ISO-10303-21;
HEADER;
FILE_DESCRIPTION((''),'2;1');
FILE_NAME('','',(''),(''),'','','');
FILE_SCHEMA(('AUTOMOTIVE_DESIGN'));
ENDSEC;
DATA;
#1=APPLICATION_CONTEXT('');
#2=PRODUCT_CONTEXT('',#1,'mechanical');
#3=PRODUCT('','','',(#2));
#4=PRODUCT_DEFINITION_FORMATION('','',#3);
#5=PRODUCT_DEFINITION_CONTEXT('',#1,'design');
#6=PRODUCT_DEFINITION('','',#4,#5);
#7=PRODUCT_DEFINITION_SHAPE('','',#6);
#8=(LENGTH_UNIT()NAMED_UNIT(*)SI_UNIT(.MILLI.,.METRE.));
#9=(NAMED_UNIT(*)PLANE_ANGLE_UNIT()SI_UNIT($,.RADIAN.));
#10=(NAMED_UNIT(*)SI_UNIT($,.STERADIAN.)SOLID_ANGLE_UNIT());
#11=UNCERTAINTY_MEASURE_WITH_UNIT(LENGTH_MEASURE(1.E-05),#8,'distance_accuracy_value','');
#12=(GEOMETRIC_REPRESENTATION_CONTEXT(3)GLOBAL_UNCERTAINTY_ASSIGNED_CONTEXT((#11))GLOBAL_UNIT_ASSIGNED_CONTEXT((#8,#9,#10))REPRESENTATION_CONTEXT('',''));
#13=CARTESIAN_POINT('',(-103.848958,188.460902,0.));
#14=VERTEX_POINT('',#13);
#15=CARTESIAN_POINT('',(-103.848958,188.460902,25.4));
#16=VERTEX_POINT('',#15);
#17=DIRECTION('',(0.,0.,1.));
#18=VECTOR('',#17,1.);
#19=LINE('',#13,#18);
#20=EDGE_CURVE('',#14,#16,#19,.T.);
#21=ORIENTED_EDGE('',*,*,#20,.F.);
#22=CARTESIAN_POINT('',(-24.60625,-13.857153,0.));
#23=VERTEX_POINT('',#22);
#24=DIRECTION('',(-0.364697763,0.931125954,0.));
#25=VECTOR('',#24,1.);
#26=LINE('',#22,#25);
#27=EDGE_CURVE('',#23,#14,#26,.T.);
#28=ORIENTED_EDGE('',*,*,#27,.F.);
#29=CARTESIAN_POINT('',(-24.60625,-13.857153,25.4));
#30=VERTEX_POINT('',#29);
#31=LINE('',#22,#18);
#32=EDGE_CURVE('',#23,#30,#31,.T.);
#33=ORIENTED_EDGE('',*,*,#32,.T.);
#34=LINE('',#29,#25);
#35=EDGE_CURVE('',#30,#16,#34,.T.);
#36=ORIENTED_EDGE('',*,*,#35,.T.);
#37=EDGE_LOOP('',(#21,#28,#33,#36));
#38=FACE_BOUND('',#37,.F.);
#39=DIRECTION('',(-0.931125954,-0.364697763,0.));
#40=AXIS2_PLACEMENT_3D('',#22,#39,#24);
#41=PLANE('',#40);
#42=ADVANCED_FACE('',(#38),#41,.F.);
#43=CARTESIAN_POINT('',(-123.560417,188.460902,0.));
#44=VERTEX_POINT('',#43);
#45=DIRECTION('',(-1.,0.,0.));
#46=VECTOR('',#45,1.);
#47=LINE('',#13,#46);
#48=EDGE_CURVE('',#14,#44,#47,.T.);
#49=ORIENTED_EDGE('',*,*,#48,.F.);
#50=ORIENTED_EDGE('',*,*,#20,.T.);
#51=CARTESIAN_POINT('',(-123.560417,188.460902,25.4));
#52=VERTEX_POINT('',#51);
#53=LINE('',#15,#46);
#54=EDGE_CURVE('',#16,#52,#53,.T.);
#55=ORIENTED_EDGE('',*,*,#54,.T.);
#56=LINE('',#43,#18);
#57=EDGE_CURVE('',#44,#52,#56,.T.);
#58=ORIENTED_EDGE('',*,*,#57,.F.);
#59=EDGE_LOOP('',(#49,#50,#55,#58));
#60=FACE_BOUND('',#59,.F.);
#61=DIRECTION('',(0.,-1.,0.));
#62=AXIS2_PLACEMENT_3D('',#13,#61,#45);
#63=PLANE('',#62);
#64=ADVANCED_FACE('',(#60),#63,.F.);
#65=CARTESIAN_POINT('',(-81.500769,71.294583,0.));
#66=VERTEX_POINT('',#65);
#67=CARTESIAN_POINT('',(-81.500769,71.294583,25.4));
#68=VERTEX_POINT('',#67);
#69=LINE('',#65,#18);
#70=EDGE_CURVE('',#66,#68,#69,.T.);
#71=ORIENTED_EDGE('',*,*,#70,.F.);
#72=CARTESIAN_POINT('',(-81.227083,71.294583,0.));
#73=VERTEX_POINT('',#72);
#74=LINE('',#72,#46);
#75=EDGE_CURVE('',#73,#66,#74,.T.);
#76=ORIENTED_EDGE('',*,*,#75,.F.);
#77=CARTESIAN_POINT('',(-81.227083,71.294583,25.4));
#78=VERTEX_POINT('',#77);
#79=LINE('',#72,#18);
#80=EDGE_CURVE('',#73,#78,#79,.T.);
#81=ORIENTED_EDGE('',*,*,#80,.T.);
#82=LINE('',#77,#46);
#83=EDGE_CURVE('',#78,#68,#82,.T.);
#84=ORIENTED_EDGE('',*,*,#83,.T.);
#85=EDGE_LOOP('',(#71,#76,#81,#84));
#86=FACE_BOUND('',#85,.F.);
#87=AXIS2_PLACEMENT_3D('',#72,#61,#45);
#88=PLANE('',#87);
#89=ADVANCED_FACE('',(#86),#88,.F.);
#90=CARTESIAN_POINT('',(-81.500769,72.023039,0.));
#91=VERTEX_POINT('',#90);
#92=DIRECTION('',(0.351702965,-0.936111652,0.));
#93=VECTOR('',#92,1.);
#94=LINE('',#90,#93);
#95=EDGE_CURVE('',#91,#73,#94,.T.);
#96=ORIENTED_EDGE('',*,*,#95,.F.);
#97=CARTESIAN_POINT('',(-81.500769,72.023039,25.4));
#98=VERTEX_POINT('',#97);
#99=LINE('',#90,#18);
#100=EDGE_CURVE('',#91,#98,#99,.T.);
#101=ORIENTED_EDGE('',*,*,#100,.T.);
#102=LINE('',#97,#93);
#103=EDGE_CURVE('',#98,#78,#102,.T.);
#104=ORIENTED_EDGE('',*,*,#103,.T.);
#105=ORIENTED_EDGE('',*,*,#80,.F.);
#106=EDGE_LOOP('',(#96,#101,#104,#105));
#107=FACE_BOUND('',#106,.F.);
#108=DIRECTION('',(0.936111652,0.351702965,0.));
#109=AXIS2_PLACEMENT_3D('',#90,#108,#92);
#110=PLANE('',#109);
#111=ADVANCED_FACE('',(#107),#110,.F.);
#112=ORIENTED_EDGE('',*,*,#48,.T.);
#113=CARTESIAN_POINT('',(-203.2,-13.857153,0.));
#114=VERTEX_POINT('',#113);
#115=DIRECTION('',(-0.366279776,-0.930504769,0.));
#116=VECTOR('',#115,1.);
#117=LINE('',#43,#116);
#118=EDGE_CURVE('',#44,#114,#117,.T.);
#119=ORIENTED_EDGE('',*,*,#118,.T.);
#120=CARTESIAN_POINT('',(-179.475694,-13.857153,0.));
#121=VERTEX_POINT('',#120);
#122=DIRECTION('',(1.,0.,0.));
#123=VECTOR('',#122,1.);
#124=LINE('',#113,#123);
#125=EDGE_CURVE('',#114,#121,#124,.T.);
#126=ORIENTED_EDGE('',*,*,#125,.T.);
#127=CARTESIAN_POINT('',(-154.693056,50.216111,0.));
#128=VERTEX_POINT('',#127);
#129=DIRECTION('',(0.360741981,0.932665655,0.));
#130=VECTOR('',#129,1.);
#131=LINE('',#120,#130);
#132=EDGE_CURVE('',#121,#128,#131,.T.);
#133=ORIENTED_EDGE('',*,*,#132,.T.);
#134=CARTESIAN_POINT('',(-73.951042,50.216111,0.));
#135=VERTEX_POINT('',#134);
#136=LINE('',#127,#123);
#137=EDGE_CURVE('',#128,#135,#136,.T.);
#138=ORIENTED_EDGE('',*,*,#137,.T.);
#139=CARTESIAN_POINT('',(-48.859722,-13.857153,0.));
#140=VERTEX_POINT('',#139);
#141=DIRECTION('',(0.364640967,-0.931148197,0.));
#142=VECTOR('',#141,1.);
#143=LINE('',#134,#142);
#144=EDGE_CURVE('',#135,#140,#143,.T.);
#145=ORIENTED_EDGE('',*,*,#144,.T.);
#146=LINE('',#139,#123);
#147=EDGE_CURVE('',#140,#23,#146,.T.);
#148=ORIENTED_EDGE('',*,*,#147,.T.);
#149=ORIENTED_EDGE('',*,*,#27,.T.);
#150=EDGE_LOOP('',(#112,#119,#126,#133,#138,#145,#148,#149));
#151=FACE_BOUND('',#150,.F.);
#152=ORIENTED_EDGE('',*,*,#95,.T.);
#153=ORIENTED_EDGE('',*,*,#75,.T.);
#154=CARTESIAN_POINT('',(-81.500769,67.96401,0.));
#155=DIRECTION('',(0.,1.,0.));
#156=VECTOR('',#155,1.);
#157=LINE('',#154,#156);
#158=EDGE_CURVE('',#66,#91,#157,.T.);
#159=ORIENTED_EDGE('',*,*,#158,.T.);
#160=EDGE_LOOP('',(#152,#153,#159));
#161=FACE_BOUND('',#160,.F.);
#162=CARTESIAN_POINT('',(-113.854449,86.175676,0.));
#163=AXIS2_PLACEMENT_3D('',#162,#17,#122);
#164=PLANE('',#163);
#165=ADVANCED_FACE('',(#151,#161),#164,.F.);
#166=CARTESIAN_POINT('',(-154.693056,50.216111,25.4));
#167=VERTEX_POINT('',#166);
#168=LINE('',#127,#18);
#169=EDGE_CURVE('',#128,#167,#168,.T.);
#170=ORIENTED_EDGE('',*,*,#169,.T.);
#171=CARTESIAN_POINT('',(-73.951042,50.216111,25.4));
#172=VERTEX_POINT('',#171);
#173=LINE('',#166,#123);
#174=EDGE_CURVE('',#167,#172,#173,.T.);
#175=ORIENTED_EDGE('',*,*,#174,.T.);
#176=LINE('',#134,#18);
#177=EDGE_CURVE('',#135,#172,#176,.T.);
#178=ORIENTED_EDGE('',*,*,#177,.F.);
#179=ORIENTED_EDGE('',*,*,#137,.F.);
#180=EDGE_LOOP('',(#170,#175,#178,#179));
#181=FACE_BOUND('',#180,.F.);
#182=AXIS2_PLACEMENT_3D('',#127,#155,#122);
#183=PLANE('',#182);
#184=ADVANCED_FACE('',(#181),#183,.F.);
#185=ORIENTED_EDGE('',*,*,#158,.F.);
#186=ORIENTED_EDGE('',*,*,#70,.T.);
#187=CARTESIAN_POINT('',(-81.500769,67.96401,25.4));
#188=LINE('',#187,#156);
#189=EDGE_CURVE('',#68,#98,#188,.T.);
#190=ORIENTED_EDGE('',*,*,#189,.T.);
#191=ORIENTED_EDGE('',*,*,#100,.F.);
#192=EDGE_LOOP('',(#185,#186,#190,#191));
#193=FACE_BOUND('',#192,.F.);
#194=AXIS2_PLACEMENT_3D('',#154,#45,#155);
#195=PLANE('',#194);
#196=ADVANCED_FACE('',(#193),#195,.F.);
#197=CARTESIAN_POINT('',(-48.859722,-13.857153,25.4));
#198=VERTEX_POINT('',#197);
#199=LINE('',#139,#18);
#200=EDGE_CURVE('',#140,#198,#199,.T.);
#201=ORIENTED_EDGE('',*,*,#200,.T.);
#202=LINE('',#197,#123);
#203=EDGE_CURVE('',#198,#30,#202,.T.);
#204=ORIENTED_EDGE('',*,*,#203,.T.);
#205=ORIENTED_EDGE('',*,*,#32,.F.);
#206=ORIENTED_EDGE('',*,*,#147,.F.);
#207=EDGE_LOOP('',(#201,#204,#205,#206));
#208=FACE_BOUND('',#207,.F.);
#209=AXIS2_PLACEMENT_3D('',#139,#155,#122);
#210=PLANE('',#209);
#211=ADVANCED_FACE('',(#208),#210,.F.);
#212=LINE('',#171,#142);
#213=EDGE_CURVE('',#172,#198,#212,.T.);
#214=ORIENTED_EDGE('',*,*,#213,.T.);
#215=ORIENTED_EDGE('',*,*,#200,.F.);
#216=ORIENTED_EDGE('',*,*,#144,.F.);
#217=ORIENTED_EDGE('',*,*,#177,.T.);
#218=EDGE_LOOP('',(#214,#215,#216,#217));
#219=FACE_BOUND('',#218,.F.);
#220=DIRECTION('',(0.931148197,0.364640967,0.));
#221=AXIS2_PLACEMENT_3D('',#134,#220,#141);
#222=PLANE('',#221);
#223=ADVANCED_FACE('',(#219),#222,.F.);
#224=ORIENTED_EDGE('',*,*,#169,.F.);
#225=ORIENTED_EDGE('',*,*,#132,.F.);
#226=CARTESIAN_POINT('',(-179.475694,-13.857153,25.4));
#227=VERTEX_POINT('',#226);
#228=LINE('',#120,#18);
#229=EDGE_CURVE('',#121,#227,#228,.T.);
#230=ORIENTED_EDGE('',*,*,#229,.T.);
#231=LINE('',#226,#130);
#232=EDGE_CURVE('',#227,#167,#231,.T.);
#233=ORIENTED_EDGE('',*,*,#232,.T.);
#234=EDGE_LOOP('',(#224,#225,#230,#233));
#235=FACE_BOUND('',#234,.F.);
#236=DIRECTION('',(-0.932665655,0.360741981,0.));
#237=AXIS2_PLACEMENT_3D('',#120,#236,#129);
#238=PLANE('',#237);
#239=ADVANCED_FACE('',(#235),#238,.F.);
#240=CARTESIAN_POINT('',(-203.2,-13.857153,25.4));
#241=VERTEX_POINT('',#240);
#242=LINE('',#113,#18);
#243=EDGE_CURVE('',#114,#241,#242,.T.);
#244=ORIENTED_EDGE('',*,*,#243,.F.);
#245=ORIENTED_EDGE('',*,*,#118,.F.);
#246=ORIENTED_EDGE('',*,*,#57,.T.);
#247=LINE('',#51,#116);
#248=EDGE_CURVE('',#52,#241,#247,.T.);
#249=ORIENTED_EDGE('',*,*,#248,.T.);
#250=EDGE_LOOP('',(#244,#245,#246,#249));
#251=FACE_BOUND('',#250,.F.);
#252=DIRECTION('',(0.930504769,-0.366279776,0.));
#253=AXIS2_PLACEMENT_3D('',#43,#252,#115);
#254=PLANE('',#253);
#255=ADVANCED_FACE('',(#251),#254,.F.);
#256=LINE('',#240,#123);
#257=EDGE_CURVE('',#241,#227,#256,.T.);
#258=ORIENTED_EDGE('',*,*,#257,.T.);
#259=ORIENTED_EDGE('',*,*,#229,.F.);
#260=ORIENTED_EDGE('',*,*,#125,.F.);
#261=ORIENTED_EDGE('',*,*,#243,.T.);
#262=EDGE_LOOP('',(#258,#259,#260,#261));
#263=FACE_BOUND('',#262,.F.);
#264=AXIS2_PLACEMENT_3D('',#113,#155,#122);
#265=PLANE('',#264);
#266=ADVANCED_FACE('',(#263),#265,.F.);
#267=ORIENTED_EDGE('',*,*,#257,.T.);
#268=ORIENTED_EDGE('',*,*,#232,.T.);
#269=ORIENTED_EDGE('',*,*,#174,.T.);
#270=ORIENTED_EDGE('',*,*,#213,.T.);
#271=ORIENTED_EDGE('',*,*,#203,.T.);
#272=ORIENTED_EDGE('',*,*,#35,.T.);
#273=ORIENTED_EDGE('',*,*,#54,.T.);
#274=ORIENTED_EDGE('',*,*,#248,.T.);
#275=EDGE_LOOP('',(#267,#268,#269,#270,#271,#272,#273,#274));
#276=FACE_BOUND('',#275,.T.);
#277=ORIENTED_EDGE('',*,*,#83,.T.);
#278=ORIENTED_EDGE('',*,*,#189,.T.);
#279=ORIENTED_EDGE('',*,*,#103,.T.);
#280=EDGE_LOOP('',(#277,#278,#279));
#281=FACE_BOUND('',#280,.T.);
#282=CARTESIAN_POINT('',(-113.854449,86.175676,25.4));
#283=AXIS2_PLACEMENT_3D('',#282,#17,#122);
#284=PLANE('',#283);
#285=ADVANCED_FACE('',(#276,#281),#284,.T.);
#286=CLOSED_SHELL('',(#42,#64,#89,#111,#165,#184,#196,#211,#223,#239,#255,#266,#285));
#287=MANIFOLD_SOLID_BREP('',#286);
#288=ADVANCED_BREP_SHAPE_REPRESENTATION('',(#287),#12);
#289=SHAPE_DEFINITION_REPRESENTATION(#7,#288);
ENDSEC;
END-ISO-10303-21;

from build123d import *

# Parameters (mm, degrees)
F1_DEPTH = 25.4
F2_DEPTH = 25.4


with BuildPart() as f1:
    # F0 (on Top) → F1 (new body)
    with BuildSketch(Plane.XY):
        Polygon((-123.5604166667, 188.4609023112), (-203.2, -13.8571532443), (-179.4756944444, -13.8571532443), (-154.6930555556, 50.2161106446), (-73.9510416667, 50.2161106446), (-48.8597222222, -13.8571532443), (-24.60625, -13.8571532443), (-103.8489583333, 188.4609023112), align=None)
        Polygon((-81.5007686615, 67.9640099406), (-152.8517007828, 67.9640099406), (-152.8517007828, 106.1364486814), (-139.8437470198, 106.1364486814), (-139.8437470198, 137.258246541), (-127.1816492081, 137.258246541), (-127.1816492081, 169.5059537888), (-101.4676243067, 169.5059537888), (-101.4676243067, 137.258246541), (-90.7859355211, 137.258246541), (-90.7859355211, 106.1364486814), (-81.5007686615, 106.1364486814), (-81.5007686615, 72.0230385523), (-81.2270833333, 71.2945828668), (-81.5007686615, 71.2945828668), align=None, mode=Mode.SUBTRACT)
    extrude(amount=F1_DEPTH)

    # F0 (on Top) → F2 (join)
    with BuildSketch(Plane.XY):
        Polygon((-146.4027777778, 71.2945828668), (-81.5007686615, 71.2945828668), (-81.5007686615, 72.0230385523), (-94.3173888512, 106.1364486814), (-133.1894430727, 106.1364486814), align=None)
        with BuildLine():
            Line((-122.7225694444, 133.7362495335), (-133.1894430727, 106.1364486814))
            Line((-133.1894430727, 106.1364486814), (-94.3173888512, 106.1364486814))
            Line((-94.3173888512, 106.1364486814), (-104.6868055556, 133.7362495335))
            add(Edge.make_bspline(
                [(-104.6868055556, 133.7362495335), (-105.3399663206, 135.4420771625), (-105.9985985773, 137.258246541)],
                knots=[0, 0, 0, 0.1438042201, 0.1438042201, 0.1438042201], degree=2))
            Line((-105.9985985773, 137.258246541), (-121.4879183379, 137.258246541))
            add(Edge.make_bspline(
                [(-121.4879183379, 137.258246541), (-122.0888459048, 135.5136460237), (-122.7225694444, 133.7362495335)],
                knots=[0.8877261445, 0.8877261445, 0.8877261445, 1, 1, 1], degree=2))
        make_face()
        with BuildLine():
            Line((-127.1816492081, 169.5059537888), (-127.1816492081, 137.258246541))
            Line((-127.1816492081, 137.258246541), (-121.4879183379, 137.258246541))
            add(Edge.make_bspline(
                [(-114.0354166667, 162.7963189779), (-116.7365084044, 151.0524418574), (-121.4879183379, 137.258246541)],
                knots=[0, 0, 0, 0.8877261445, 0.8877261445, 0.8877261445], degree=2))
            add(Edge.make_bspline(
                [(-105.9985985773, 137.258246541), (-109.9200284094, 148.071535305), (-114.0354166667, 162.7963189779)],
                knots=[0.1438042201, 0.1438042201, 0.1438042201, 1, 1, 1], degree=2))
            Line((-105.9985985773, 137.258246541), (-101.4676243067, 137.258246541))
            Line((-101.4676243067, 137.258246541), (-101.4676243067, 169.5059537888))
            Line((-101.4676243067, 169.5059537888), (-127.1816492081, 169.5059537888))
        make_face()
        with BuildLine():
            Line((-139.8437470198, 137.258246541), (-139.8437470198, 106.1364486814))
            Line((-139.8437470198, 106.1364486814), (-133.1894430727, 106.1364486814))
            Line((-133.1894430727, 106.1364486814), (-122.7225694444, 133.7362495335))
            add(Edge.make_bspline(
                [(-121.4879183379, 137.258246541), (-122.0888459048, 135.5136460237), (-122.7225694444, 133.7362495335)],
                knots=[0.8877261445, 0.8877261445, 0.8877261445, 1, 1, 1], degree=2))
            Line((-121.4879183379, 137.258246541), (-127.1816492081, 137.258246541))
            Line((-127.1816492081, 137.258246541), (-139.8437470198, 137.258246541))
        make_face()
        Polygon((-152.8517007828, 106.1364486814), (-152.8517007828, 67.9640099406), (-81.5007686615, 67.9640099406), (-81.5007686615, 71.2945828668), (-146.4027777778, 71.2945828668), (-133.1894430727, 106.1364486814), (-139.8437470198, 106.1364486814), align=None)
        with BuildLine():
            Line((-104.6868055556, 133.7362495335), (-94.3173888512, 106.1364486814))
            Line((-94.3173888512, 106.1364486814), (-90.7859355211, 106.1364486814))
            Line((-90.7859355211, 106.1364486814), (-90.7859355211, 137.258246541))
            Line((-90.7859355211, 137.258246541), (-101.4676243067, 137.258246541))
            Line((-101.4676243067, 137.258246541), (-105.9985985773, 137.258246541))
            add(Edge.make_bspline(
                [(-104.6868055556, 133.7362495335), (-105.3399663206, 135.4420771625), (-105.9985985773, 137.258246541)],
                knots=[0, 0, 0, 0.1438042201, 0.1438042201, 0.1438042201], degree=2))
        make_face()
        Polygon((-94.3173888512, 106.1364486814), (-81.5007686615, 72.0230385523), (-81.5007686615, 106.1364486814), (-90.7859355211, 106.1364486814), align=None)
        with BuildLine():
            add(Edge.make_bspline(
                [(-114.0354166667, 162.7963189779), (-116.7365084044, 151.0524418574), (-121.4879183379, 137.258246541)],
                knots=[0, 0, 0, 0.8877261445, 0.8877261445, 0.8877261445], degree=2))
            Line((-121.4879183379, 137.258246541), (-105.9985985773, 137.258246541))
            add(Edge.make_bspline(
                [(-105.9985985773, 137.258246541), (-109.9200284094, 148.071535305), (-114.0354166667, 162.7963189779)],
                knots=[0.1438042201, 0.1438042201, 0.1438042201, 1, 1, 1], degree=2))
        make_face()
    extrude(amount=F2_DEPTH)


solid = f1.part
